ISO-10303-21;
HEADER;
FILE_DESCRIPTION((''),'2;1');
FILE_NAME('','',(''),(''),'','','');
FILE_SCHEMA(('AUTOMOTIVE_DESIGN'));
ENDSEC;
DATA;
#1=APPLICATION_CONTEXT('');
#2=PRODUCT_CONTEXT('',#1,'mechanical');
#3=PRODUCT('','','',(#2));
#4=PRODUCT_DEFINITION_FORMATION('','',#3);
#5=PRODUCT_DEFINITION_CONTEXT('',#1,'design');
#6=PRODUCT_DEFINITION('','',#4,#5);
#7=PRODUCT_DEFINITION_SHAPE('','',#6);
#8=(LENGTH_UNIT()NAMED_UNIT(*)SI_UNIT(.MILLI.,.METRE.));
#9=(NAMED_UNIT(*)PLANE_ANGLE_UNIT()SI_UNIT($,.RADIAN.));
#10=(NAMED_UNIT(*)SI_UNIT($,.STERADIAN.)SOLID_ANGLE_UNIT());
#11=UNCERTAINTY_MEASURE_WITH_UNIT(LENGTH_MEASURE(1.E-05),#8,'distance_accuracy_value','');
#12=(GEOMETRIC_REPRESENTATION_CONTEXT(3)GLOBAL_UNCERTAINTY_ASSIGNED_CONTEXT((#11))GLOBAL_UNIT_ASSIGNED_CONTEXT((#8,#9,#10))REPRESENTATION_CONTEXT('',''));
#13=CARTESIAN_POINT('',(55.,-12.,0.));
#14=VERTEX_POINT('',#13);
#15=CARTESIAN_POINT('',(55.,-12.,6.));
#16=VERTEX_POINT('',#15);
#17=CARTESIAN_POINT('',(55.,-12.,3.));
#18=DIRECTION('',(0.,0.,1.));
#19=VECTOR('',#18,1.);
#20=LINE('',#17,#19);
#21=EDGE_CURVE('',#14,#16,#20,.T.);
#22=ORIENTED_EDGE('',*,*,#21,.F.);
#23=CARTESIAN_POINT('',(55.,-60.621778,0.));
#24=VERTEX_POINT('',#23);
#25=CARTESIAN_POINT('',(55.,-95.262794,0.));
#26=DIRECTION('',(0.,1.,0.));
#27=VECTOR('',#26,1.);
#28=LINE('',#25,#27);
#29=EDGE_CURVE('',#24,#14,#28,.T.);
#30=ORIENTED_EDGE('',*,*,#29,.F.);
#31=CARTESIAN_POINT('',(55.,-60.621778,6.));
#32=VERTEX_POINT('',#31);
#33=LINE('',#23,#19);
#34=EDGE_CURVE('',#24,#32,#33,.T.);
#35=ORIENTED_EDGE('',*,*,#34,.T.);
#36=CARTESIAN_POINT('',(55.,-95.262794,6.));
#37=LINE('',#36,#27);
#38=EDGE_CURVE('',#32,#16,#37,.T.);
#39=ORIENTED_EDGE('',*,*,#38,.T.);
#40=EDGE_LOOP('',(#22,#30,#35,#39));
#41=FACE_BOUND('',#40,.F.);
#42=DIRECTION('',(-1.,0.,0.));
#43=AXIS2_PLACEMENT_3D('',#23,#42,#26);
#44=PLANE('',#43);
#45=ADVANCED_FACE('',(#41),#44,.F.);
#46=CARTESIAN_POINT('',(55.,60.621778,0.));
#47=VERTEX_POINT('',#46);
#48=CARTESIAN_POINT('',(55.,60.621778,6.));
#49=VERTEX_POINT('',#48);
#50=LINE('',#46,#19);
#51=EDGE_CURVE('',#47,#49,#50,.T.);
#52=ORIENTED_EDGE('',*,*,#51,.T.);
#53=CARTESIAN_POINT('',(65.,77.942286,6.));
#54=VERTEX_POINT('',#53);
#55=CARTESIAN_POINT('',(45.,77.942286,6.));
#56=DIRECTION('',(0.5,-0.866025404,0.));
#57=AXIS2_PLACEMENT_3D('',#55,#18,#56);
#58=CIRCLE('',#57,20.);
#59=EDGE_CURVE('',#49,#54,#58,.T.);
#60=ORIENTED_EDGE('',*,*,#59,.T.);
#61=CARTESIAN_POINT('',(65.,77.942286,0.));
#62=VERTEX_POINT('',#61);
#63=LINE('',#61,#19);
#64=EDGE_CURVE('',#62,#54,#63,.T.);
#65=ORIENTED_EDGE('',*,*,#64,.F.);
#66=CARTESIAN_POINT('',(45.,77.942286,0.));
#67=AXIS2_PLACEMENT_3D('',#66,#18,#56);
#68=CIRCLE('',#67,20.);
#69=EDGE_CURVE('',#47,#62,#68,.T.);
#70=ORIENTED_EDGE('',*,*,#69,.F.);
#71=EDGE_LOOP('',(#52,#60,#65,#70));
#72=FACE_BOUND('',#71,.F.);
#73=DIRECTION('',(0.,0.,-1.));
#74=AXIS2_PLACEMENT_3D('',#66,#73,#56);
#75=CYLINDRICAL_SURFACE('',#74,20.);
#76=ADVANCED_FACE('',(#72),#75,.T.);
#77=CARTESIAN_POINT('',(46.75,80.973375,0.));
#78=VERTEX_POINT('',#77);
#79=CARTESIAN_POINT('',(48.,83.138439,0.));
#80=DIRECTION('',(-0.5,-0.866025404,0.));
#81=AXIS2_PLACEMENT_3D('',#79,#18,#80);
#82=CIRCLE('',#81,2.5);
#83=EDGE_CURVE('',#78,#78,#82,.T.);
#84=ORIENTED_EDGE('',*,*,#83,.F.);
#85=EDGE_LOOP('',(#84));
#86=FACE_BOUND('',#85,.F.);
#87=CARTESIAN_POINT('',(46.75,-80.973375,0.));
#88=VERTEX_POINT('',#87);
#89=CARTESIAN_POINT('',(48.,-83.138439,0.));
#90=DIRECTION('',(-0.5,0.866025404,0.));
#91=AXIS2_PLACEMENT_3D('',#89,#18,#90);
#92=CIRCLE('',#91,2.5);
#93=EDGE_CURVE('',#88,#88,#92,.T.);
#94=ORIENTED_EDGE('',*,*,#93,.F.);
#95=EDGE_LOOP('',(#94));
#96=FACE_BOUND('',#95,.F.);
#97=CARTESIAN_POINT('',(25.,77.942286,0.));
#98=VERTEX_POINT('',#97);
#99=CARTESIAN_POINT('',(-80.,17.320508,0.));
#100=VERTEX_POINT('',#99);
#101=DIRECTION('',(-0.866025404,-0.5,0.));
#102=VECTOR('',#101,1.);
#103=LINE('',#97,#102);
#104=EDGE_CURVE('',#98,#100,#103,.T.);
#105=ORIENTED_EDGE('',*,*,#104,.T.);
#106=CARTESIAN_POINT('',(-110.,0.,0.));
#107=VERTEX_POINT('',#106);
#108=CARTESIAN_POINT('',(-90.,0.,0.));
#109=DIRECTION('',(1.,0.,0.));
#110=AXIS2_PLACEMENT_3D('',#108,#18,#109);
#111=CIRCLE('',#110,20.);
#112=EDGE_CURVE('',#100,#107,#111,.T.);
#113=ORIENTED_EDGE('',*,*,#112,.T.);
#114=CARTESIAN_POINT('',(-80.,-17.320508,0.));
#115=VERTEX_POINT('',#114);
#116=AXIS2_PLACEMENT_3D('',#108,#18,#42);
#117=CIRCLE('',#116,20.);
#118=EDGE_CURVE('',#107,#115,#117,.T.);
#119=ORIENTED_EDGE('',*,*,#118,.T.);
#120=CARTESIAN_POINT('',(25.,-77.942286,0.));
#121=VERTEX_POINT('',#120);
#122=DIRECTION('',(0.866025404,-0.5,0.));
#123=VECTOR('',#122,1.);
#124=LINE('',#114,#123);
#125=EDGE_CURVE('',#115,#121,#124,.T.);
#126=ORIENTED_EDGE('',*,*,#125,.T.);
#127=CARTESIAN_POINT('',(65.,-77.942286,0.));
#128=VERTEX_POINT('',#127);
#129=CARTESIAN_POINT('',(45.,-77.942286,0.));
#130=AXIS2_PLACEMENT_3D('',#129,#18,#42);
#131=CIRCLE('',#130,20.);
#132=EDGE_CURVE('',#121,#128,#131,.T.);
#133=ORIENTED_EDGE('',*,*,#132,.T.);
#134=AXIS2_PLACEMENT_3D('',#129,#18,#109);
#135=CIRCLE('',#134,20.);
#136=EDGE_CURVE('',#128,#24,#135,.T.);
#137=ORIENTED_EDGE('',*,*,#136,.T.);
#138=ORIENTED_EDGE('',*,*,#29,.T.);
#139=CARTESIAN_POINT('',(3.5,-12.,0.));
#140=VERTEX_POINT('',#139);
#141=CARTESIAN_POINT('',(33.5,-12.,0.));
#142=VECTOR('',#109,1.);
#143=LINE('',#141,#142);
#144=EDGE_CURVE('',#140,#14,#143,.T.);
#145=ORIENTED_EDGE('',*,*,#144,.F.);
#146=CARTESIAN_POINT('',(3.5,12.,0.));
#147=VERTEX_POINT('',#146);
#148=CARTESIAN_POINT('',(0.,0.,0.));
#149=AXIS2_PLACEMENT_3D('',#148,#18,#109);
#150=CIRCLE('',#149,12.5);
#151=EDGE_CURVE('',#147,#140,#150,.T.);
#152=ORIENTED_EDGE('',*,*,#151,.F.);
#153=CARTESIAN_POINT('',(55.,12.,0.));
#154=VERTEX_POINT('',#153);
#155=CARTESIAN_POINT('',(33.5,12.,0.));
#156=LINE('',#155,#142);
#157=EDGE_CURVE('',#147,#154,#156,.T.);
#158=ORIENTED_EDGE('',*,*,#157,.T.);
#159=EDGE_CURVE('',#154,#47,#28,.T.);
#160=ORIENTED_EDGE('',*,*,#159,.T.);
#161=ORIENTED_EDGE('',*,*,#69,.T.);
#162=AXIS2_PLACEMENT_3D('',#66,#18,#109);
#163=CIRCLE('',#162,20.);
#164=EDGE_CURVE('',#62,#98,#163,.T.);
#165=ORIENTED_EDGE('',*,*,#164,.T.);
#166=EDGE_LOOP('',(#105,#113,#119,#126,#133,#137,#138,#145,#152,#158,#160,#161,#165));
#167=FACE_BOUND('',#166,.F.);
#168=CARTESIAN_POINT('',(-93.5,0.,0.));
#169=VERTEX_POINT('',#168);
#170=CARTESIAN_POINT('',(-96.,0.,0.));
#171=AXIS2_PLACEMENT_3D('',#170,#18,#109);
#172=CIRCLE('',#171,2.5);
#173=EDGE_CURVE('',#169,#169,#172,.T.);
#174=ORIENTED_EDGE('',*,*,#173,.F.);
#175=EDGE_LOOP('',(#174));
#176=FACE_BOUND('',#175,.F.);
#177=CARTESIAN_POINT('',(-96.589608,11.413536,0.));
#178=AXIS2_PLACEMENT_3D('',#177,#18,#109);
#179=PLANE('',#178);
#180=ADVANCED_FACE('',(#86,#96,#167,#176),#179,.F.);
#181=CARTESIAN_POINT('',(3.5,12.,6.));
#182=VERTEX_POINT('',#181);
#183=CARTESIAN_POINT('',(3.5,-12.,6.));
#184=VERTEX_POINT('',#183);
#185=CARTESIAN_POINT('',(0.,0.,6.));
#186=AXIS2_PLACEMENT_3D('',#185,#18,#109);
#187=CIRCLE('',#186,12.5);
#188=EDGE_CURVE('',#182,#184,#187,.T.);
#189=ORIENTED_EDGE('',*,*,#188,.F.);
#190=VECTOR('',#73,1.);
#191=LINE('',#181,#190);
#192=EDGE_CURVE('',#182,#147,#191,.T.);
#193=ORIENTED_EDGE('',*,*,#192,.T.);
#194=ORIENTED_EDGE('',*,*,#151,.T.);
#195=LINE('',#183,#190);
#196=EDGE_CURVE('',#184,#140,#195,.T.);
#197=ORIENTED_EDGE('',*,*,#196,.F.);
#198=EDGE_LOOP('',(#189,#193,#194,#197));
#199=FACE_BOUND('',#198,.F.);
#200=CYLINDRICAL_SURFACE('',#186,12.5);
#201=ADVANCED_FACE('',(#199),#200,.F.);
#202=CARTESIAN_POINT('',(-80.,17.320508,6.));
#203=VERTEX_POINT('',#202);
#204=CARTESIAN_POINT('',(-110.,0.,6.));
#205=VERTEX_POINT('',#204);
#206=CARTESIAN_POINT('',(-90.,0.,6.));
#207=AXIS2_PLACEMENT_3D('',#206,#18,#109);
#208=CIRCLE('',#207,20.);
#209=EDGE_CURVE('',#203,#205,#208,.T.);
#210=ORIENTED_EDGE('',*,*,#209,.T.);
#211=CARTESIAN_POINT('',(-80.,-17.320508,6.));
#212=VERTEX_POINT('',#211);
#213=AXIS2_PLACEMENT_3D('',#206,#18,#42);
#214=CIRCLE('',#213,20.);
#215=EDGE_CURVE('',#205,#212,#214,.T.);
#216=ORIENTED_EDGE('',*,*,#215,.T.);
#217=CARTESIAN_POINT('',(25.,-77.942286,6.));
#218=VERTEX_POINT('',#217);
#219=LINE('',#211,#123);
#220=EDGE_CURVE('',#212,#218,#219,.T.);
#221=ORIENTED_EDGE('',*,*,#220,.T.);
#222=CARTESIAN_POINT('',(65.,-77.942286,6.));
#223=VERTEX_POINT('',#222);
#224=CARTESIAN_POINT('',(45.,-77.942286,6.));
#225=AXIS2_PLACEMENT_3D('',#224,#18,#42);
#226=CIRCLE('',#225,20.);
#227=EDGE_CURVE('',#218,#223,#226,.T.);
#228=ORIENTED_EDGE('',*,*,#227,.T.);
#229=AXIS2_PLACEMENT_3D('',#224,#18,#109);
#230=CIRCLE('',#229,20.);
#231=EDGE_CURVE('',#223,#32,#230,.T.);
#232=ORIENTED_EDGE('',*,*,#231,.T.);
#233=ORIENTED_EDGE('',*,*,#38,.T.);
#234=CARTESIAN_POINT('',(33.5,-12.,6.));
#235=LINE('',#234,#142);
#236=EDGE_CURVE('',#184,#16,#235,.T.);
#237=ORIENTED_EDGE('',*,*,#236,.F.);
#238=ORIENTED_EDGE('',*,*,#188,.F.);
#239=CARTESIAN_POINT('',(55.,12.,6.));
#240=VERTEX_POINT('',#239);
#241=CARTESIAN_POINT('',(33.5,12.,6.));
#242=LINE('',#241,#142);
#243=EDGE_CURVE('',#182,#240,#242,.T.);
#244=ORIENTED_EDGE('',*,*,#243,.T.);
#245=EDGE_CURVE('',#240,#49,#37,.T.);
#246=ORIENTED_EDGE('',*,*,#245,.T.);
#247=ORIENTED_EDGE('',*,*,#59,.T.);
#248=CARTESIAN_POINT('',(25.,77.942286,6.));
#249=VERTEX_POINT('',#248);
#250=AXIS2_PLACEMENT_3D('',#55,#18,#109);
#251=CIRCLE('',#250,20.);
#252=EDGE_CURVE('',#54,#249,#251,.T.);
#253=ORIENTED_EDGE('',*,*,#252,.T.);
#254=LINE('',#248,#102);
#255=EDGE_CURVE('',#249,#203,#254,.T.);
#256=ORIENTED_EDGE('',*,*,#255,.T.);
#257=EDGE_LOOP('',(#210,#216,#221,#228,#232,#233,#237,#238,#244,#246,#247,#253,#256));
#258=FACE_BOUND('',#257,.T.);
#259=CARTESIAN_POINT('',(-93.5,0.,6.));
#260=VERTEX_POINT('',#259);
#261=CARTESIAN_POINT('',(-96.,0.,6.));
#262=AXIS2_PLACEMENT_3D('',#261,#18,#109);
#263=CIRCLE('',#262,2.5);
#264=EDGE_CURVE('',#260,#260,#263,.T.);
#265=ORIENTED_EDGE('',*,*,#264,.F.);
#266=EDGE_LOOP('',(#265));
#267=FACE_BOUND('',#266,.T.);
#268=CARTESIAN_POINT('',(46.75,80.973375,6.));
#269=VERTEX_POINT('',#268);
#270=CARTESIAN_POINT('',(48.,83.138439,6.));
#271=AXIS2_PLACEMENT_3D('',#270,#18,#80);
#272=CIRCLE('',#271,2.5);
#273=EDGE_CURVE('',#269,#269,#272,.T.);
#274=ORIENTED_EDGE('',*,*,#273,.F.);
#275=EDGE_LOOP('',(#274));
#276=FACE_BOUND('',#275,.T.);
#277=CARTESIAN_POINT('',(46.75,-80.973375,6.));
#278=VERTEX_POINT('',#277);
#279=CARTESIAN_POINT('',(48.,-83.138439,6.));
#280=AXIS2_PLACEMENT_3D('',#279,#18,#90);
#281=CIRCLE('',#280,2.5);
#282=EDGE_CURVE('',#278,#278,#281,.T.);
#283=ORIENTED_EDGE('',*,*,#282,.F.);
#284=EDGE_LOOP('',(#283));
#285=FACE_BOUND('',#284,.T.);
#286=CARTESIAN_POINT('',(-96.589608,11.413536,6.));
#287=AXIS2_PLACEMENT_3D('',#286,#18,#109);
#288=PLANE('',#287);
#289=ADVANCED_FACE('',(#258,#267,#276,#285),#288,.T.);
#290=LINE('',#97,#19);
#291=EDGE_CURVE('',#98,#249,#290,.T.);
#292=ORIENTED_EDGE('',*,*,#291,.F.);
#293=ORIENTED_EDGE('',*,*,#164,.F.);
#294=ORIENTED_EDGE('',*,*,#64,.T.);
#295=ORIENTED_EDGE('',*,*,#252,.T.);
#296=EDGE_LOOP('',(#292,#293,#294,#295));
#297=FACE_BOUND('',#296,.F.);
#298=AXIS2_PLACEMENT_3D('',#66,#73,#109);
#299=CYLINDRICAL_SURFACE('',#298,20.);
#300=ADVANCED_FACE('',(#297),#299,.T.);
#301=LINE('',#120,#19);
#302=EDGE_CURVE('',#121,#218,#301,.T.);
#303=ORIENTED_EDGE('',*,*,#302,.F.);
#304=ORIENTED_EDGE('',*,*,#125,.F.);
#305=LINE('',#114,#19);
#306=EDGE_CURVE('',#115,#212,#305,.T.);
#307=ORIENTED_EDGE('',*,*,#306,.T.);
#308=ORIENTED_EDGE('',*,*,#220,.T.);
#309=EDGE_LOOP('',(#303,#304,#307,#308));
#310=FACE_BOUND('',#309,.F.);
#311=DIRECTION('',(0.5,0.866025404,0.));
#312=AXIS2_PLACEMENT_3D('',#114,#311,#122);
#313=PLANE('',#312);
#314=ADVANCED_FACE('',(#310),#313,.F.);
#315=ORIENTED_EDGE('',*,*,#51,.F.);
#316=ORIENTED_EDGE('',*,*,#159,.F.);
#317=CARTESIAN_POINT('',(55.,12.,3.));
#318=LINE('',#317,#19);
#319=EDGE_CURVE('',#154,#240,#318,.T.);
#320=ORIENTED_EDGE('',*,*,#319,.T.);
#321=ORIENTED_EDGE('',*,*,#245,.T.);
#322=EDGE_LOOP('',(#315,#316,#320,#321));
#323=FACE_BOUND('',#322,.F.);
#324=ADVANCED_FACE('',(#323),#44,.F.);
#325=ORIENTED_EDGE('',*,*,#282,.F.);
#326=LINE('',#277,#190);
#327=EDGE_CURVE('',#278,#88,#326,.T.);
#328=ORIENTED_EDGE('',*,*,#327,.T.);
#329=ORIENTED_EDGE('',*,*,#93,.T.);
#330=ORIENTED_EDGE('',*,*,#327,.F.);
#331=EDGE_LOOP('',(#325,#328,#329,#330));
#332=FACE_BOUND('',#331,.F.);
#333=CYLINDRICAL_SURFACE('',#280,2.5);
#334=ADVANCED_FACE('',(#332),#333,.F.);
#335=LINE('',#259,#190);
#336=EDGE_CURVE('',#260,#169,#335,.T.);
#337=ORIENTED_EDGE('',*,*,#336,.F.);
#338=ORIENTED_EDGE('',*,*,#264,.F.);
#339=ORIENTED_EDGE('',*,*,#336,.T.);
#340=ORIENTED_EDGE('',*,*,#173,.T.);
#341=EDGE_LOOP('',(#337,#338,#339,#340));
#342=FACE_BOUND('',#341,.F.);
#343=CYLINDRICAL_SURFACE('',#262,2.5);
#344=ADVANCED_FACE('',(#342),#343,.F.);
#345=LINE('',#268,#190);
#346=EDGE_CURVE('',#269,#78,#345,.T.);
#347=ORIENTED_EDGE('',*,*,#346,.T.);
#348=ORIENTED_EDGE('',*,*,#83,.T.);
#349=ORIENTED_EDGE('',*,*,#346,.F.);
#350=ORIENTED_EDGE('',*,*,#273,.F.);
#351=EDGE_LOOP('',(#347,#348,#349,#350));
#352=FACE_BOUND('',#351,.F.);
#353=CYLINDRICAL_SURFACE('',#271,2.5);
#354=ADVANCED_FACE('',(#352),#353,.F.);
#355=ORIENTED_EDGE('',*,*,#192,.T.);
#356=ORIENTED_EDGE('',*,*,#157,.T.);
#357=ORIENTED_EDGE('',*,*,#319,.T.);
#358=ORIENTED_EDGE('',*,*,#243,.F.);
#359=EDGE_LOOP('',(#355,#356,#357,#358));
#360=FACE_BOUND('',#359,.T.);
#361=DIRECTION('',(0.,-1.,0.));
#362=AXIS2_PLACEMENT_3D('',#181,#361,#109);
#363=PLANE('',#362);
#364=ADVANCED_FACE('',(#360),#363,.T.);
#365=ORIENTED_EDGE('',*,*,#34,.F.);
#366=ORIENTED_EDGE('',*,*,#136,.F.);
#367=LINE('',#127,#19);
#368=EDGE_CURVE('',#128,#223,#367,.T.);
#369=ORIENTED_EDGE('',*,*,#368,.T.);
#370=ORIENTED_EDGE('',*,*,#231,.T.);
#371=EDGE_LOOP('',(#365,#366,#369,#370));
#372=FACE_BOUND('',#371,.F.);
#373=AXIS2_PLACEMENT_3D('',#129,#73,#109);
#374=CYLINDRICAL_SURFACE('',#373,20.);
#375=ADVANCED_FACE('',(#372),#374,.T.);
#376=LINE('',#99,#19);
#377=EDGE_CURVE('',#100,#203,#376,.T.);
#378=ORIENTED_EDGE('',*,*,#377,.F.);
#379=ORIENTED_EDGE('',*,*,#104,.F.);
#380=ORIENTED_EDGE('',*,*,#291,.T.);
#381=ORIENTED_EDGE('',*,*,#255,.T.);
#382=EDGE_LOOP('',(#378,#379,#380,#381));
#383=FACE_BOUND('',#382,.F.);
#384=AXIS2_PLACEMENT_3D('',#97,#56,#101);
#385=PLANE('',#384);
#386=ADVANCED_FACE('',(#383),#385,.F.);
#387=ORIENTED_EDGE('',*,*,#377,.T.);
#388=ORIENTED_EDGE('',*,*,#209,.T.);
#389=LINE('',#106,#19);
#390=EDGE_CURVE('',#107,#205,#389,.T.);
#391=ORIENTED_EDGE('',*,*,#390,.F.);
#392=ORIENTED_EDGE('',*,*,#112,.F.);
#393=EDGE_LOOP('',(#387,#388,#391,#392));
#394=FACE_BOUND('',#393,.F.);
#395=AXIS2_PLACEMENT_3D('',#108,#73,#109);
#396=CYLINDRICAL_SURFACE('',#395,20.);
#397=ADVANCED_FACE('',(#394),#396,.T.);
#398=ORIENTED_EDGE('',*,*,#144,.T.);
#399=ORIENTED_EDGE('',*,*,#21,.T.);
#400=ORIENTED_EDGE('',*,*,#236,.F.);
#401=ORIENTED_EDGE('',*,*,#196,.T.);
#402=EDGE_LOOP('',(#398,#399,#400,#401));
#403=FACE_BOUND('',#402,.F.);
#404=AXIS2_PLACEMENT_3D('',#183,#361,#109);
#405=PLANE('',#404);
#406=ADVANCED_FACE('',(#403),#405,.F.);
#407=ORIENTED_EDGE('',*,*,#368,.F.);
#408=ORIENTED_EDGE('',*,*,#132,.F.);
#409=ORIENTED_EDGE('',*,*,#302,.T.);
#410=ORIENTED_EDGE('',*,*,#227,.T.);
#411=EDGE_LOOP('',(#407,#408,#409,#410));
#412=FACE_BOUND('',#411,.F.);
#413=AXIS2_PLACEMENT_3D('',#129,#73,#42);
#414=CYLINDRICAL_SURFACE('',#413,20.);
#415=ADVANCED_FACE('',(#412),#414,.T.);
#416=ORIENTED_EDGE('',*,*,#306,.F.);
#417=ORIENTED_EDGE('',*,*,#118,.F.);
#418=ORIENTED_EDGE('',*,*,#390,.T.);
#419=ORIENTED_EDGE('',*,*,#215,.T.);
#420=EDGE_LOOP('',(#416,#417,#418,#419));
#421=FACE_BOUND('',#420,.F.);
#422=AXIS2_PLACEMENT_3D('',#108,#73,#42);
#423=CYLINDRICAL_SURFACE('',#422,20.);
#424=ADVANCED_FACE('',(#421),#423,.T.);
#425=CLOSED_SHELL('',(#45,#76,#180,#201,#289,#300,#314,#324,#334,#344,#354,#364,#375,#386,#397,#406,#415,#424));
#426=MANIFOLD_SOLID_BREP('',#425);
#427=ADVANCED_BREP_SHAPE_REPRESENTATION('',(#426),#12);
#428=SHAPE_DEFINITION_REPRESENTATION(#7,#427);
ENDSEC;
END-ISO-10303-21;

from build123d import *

# Parameters (mm, degrees)
F1_DEPTH        = 6
F2_R            = 12.5
F3_DEPTH        = 6
F4_R            = 2.5
F5_DEPTH        = 6
F5_COPIES_COUNT = 3
F6_W            = 60
F6_H            = 24
F7_DEPTH        = 6


# Not quite as in the source:
# - a pattern or mirror of a feature is missing from the dataset's text; its kind, count and spacing are read off the source's solid


with BuildPart() as f1:
    # F0 (on Top) → F1 (new body)
    with BuildSketch(Plane.XY):
        with BuildLine():
            ThreePointArc((-80, 17.3205080757), (-100, 17.3205080757), (-110, 0))
            Line((-110, 0), (-80, 17.3205080757))
        make_face()
        with BuildLine():
            Line((-80, 17.3205080757), (-110, 0))
            Line((-110, 0), (-80, -17.3205080757))
            ThreePointArc((-80, -17.3205080757), (-72.6794919243, -10), (-70, 0))
            ThreePointArc((-70, 0), (-72.6794919243, 10), (-80, 17.3205080757))
        make_face()
        with BuildLine():
            Line((-80, -17.3205080757), (-110, 0))
            ThreePointArc((-110, 0), (-100, -17.3205080757), (-80, -17.3205080757))
        make_face()
        with BuildLine():
            Line((25, 77.9422863406), (-80, 17.3205080757))
            ThreePointArc((-80, 17.3205080757), (-72.6794919243, 10), (-70, 0))
            ThreePointArc((-70, 0), (-72.6794919243, -10), (-80, -17.3205080757))
            Line((-80, -17.3205080757), (25, -77.9422863406))
            ThreePointArc((25, -77.9422863406), (35, -60.6217782649), (55, -60.6217782649))
            Line((55, -60.6217782649), (55, 60.6217782649))
            ThreePointArc((55, 60.6217782649), (35, 60.6217782649), (25, 77.9422863406))
        make_face()
        with BuildLine():
            ThreePointArc((55, 95.2627944163), (35, 95.2627944163), (25, 77.9422863406))
            Line((25, 77.9422863406), (55, 95.2627944163))
        make_face()
        with BuildLine():
            Line((55, 95.2627944163), (25, 77.9422863406))
            ThreePointArc((25, 77.9422863406), (35, 60.6217782649), (55, 60.6217782649))
            Line((55, 60.6217782649), (55, 95.2627944163))
        make_face()
        with BuildLine():
            ThreePointArc((55, -60.6217782649), (35, -60.6217782649), (25, -77.9422863406))
            Line((25, -77.9422863406), (55, -95.2627944163))
            Line((55, -95.2627944163), (55, -60.6217782649))
        make_face()
        with BuildLine():
            Line((55, -95.2627944163), (25, -77.9422863406))
            ThreePointArc((25, -77.9422863406), (35, -95.2627944163), (55, -95.2627944163))
        make_face()
        with BuildLine():
            ThreePointArc((65, 77.9422863406), (62.3205080757, 87.9422863406), (55, 95.2627944163))
            Line((55, 95.2627944163), (55, 60.6217782649))
            ThreePointArc((55, 60.6217782649), (62.3205080757, 67.9422863406), (65, 77.9422863406))
        make_face()
        with BuildLine():
            Line((55, -60.6217782649), (55, -95.2627944163))
            ThreePointArc((55, -95.2627944163), (62.3205080757, -87.9422863406), (65, -77.9422863406))
            ThreePointArc((65, -77.9422863406), (62.3205080757, -67.9422863406), (55, -60.6217782649))
        make_face()
    extrude(amount=F1_DEPTH)

    # F2 (on face) → F3 (cut, through all)
    with BuildSketch(Plane.XY.offset(6)):
        Circle(F2_R)
    extrude(amount=-F3_DEPTH, mode=Mode.SUBTRACT)

    # F4 (on face) → F5 (cut, through all)
    with BuildSketch(Plane.XY.offset(6)):
        with Locations((-96, 0)):
            Circle(F4_R)
    f5 = extrude(amount=-F5_DEPTH, mode=Mode.SUBTRACT)

    # F5_copies: F5 ×3 about axis
    f5_copies_axis = Axis((0, 0, 0), (0, 0, 1))
    for i in range(1, F5_COPIES_COUNT):
        add(f5.rotate(f5_copies_axis, i * 360 / F5_COPIES_COUNT), mode=Mode.SUBTRACT)

    # F6 (on face) → F7 (cut, through all)
    with BuildSketch(Plane.XY.offset(6)):
        with Locations((33.5, 0)):
            Rectangle(F6_W, F6_H)
    extrude(amount=-F7_DEPTH, mode=Mode.SUBTRACT)


solid = f1.part
